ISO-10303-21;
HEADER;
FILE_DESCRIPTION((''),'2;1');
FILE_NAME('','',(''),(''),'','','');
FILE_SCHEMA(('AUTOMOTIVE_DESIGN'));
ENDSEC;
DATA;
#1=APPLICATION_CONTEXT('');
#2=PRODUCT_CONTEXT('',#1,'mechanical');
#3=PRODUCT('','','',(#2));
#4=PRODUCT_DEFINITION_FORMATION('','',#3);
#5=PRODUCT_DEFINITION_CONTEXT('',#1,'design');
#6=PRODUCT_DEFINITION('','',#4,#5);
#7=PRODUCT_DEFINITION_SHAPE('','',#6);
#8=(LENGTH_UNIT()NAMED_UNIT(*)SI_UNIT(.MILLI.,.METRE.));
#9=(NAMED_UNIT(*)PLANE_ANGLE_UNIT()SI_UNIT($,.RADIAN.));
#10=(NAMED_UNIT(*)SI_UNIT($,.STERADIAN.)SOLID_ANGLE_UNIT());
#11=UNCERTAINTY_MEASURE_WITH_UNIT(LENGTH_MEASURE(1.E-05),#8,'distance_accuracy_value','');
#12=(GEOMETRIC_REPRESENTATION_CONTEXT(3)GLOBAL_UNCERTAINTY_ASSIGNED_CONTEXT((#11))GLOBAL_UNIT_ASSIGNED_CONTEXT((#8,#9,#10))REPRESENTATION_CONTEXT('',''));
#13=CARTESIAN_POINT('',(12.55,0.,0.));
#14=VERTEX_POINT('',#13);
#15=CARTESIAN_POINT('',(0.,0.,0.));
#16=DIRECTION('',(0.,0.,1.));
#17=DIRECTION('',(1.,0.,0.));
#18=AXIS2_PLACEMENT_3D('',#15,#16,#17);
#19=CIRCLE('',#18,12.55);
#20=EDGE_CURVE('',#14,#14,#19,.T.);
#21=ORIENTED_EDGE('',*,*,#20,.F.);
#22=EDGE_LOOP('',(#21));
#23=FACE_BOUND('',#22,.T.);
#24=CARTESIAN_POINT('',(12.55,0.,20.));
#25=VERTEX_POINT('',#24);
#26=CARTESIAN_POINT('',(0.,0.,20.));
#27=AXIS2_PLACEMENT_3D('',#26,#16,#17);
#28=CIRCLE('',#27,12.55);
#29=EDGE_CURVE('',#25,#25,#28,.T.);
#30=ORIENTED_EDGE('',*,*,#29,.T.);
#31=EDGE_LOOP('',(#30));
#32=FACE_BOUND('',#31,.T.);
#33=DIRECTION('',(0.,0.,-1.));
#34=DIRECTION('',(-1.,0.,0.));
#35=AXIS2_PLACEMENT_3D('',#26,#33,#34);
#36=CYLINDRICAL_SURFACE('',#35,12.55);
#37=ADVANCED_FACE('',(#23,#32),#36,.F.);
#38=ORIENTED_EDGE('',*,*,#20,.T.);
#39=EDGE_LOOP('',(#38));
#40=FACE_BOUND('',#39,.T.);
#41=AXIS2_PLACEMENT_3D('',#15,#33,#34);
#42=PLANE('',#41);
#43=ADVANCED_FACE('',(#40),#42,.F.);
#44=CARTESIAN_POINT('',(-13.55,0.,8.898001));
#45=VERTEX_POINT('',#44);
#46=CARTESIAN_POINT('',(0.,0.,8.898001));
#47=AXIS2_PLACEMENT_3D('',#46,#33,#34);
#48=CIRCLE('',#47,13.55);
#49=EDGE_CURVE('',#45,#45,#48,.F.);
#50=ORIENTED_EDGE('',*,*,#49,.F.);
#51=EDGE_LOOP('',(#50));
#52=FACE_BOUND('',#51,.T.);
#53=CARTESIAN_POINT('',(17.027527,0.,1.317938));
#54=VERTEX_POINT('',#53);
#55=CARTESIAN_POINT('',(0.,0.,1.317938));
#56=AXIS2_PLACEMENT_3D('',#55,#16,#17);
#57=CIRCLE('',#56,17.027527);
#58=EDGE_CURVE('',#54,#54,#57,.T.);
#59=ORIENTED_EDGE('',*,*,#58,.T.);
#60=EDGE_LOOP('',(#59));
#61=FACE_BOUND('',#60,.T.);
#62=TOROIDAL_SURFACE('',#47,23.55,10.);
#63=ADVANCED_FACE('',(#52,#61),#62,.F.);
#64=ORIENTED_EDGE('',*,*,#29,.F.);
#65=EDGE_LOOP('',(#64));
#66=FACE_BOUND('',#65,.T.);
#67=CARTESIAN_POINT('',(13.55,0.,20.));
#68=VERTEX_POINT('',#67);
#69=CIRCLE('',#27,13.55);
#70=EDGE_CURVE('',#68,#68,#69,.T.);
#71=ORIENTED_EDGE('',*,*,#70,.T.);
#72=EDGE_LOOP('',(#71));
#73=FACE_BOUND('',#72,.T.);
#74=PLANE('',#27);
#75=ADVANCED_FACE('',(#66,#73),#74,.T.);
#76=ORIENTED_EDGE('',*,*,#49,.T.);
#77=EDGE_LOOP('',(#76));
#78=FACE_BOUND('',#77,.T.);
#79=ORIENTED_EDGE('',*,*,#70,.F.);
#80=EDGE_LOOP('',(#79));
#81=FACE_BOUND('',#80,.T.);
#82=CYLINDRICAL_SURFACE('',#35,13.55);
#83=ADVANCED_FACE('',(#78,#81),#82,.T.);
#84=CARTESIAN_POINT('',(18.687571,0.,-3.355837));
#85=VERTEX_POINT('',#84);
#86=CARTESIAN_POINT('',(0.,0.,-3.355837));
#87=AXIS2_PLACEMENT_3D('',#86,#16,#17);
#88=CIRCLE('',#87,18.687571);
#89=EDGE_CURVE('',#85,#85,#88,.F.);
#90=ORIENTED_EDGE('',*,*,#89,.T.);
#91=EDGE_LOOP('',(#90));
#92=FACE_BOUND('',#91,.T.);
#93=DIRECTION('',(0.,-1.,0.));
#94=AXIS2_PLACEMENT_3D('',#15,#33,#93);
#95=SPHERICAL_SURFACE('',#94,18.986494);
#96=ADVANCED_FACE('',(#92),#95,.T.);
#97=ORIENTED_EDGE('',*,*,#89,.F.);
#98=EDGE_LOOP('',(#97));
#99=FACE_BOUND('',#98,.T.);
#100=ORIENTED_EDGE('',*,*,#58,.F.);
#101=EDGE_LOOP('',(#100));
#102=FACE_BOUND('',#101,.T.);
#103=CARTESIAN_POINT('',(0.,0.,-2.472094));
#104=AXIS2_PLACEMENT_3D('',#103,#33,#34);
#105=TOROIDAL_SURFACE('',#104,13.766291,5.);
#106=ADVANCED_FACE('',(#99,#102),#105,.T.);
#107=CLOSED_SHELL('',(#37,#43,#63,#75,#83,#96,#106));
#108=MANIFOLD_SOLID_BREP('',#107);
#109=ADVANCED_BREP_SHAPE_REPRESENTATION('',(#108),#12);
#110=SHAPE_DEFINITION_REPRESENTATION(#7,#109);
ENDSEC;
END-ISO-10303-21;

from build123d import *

# Parameters (mm, degrees)
ESQUISSE1_R        = 13.55
ESQUISSE1_R_2      = 12.55
BOSS_EXTRU_1_DEPTH = 20
CONG_1_R           = 10
CONG_2_R           = 5


with BuildPart() as part:
    # Esquisse1 → Boss.-Extru.1 (new body)
    with BuildSketch(Plane.XY):
        Circle(ESQUISSE1_R)
        Circle(ESQUISSE1_R_2, mode=Mode.SUBTRACT)
    extrude(amount=BOSS_EXTRU_1_DEPTH)

    # Esquisse2 → Révolution1 (revolve)
    with BuildSketch(Plane(origin=(0, 0, 0), x_dir=(0, 0, -1), z_dir=(1, 0, 0)), mode=Mode.PRIVATE) as r_volution1_sk:
        with BuildLine():
            Line((18.986494144, 0), (0, 0))
            Line((0, 0), (0, -18.986494144))
            ThreePointArc((0, -18.986494144), (13.42547876, -13.42547876), (18.986494144, 0))
        make_face()
    revolve(r_volution1_sk.sketch.rotate(Axis((0, 0, -18.986494144), (0, 0, 1)), 270), axis=Axis((0, 0, -18.986494144), (0, 0, 1)))

    # Congé1
    # the kernel refuses this fillet: 10 mm, written as the material it adds along each edge
    with BuildSketch(Plane(origin=(0, 0, 0), x_dir=(1, 0, 0), z_dir=(0, -1, 0))) as cong_1_piece_1:
        with BuildLine():
            CenterArc((23.55, 8.898000579), CONG_1_R, 180, 62.848132995)
            Line((13.55, 8.898000579), (13.35, 8.898000579))
            Line((13.35, 8.898000579), (13.35, 0))
            Line((13.35, 0), (13.55, -0.2))
            ThreePointArc((13.55, -0.2), (16.268247072, -0.2), (18.895224027, -0.177960012))
            Line((18.895224027, -0.177960012), (18.986494144, 0))
        make_face()
    revolve(axis=Axis((0, 0, 0), (0, 0, 1)))

    # Congé2
    cong_2_edges = [part.edges().sort_by_distance(p)[0] for p in [
        (0, 18.986494144, 0),
    ]]
    fillet(cong_2_edges, radius=CONG_2_R)


solid = part.part
